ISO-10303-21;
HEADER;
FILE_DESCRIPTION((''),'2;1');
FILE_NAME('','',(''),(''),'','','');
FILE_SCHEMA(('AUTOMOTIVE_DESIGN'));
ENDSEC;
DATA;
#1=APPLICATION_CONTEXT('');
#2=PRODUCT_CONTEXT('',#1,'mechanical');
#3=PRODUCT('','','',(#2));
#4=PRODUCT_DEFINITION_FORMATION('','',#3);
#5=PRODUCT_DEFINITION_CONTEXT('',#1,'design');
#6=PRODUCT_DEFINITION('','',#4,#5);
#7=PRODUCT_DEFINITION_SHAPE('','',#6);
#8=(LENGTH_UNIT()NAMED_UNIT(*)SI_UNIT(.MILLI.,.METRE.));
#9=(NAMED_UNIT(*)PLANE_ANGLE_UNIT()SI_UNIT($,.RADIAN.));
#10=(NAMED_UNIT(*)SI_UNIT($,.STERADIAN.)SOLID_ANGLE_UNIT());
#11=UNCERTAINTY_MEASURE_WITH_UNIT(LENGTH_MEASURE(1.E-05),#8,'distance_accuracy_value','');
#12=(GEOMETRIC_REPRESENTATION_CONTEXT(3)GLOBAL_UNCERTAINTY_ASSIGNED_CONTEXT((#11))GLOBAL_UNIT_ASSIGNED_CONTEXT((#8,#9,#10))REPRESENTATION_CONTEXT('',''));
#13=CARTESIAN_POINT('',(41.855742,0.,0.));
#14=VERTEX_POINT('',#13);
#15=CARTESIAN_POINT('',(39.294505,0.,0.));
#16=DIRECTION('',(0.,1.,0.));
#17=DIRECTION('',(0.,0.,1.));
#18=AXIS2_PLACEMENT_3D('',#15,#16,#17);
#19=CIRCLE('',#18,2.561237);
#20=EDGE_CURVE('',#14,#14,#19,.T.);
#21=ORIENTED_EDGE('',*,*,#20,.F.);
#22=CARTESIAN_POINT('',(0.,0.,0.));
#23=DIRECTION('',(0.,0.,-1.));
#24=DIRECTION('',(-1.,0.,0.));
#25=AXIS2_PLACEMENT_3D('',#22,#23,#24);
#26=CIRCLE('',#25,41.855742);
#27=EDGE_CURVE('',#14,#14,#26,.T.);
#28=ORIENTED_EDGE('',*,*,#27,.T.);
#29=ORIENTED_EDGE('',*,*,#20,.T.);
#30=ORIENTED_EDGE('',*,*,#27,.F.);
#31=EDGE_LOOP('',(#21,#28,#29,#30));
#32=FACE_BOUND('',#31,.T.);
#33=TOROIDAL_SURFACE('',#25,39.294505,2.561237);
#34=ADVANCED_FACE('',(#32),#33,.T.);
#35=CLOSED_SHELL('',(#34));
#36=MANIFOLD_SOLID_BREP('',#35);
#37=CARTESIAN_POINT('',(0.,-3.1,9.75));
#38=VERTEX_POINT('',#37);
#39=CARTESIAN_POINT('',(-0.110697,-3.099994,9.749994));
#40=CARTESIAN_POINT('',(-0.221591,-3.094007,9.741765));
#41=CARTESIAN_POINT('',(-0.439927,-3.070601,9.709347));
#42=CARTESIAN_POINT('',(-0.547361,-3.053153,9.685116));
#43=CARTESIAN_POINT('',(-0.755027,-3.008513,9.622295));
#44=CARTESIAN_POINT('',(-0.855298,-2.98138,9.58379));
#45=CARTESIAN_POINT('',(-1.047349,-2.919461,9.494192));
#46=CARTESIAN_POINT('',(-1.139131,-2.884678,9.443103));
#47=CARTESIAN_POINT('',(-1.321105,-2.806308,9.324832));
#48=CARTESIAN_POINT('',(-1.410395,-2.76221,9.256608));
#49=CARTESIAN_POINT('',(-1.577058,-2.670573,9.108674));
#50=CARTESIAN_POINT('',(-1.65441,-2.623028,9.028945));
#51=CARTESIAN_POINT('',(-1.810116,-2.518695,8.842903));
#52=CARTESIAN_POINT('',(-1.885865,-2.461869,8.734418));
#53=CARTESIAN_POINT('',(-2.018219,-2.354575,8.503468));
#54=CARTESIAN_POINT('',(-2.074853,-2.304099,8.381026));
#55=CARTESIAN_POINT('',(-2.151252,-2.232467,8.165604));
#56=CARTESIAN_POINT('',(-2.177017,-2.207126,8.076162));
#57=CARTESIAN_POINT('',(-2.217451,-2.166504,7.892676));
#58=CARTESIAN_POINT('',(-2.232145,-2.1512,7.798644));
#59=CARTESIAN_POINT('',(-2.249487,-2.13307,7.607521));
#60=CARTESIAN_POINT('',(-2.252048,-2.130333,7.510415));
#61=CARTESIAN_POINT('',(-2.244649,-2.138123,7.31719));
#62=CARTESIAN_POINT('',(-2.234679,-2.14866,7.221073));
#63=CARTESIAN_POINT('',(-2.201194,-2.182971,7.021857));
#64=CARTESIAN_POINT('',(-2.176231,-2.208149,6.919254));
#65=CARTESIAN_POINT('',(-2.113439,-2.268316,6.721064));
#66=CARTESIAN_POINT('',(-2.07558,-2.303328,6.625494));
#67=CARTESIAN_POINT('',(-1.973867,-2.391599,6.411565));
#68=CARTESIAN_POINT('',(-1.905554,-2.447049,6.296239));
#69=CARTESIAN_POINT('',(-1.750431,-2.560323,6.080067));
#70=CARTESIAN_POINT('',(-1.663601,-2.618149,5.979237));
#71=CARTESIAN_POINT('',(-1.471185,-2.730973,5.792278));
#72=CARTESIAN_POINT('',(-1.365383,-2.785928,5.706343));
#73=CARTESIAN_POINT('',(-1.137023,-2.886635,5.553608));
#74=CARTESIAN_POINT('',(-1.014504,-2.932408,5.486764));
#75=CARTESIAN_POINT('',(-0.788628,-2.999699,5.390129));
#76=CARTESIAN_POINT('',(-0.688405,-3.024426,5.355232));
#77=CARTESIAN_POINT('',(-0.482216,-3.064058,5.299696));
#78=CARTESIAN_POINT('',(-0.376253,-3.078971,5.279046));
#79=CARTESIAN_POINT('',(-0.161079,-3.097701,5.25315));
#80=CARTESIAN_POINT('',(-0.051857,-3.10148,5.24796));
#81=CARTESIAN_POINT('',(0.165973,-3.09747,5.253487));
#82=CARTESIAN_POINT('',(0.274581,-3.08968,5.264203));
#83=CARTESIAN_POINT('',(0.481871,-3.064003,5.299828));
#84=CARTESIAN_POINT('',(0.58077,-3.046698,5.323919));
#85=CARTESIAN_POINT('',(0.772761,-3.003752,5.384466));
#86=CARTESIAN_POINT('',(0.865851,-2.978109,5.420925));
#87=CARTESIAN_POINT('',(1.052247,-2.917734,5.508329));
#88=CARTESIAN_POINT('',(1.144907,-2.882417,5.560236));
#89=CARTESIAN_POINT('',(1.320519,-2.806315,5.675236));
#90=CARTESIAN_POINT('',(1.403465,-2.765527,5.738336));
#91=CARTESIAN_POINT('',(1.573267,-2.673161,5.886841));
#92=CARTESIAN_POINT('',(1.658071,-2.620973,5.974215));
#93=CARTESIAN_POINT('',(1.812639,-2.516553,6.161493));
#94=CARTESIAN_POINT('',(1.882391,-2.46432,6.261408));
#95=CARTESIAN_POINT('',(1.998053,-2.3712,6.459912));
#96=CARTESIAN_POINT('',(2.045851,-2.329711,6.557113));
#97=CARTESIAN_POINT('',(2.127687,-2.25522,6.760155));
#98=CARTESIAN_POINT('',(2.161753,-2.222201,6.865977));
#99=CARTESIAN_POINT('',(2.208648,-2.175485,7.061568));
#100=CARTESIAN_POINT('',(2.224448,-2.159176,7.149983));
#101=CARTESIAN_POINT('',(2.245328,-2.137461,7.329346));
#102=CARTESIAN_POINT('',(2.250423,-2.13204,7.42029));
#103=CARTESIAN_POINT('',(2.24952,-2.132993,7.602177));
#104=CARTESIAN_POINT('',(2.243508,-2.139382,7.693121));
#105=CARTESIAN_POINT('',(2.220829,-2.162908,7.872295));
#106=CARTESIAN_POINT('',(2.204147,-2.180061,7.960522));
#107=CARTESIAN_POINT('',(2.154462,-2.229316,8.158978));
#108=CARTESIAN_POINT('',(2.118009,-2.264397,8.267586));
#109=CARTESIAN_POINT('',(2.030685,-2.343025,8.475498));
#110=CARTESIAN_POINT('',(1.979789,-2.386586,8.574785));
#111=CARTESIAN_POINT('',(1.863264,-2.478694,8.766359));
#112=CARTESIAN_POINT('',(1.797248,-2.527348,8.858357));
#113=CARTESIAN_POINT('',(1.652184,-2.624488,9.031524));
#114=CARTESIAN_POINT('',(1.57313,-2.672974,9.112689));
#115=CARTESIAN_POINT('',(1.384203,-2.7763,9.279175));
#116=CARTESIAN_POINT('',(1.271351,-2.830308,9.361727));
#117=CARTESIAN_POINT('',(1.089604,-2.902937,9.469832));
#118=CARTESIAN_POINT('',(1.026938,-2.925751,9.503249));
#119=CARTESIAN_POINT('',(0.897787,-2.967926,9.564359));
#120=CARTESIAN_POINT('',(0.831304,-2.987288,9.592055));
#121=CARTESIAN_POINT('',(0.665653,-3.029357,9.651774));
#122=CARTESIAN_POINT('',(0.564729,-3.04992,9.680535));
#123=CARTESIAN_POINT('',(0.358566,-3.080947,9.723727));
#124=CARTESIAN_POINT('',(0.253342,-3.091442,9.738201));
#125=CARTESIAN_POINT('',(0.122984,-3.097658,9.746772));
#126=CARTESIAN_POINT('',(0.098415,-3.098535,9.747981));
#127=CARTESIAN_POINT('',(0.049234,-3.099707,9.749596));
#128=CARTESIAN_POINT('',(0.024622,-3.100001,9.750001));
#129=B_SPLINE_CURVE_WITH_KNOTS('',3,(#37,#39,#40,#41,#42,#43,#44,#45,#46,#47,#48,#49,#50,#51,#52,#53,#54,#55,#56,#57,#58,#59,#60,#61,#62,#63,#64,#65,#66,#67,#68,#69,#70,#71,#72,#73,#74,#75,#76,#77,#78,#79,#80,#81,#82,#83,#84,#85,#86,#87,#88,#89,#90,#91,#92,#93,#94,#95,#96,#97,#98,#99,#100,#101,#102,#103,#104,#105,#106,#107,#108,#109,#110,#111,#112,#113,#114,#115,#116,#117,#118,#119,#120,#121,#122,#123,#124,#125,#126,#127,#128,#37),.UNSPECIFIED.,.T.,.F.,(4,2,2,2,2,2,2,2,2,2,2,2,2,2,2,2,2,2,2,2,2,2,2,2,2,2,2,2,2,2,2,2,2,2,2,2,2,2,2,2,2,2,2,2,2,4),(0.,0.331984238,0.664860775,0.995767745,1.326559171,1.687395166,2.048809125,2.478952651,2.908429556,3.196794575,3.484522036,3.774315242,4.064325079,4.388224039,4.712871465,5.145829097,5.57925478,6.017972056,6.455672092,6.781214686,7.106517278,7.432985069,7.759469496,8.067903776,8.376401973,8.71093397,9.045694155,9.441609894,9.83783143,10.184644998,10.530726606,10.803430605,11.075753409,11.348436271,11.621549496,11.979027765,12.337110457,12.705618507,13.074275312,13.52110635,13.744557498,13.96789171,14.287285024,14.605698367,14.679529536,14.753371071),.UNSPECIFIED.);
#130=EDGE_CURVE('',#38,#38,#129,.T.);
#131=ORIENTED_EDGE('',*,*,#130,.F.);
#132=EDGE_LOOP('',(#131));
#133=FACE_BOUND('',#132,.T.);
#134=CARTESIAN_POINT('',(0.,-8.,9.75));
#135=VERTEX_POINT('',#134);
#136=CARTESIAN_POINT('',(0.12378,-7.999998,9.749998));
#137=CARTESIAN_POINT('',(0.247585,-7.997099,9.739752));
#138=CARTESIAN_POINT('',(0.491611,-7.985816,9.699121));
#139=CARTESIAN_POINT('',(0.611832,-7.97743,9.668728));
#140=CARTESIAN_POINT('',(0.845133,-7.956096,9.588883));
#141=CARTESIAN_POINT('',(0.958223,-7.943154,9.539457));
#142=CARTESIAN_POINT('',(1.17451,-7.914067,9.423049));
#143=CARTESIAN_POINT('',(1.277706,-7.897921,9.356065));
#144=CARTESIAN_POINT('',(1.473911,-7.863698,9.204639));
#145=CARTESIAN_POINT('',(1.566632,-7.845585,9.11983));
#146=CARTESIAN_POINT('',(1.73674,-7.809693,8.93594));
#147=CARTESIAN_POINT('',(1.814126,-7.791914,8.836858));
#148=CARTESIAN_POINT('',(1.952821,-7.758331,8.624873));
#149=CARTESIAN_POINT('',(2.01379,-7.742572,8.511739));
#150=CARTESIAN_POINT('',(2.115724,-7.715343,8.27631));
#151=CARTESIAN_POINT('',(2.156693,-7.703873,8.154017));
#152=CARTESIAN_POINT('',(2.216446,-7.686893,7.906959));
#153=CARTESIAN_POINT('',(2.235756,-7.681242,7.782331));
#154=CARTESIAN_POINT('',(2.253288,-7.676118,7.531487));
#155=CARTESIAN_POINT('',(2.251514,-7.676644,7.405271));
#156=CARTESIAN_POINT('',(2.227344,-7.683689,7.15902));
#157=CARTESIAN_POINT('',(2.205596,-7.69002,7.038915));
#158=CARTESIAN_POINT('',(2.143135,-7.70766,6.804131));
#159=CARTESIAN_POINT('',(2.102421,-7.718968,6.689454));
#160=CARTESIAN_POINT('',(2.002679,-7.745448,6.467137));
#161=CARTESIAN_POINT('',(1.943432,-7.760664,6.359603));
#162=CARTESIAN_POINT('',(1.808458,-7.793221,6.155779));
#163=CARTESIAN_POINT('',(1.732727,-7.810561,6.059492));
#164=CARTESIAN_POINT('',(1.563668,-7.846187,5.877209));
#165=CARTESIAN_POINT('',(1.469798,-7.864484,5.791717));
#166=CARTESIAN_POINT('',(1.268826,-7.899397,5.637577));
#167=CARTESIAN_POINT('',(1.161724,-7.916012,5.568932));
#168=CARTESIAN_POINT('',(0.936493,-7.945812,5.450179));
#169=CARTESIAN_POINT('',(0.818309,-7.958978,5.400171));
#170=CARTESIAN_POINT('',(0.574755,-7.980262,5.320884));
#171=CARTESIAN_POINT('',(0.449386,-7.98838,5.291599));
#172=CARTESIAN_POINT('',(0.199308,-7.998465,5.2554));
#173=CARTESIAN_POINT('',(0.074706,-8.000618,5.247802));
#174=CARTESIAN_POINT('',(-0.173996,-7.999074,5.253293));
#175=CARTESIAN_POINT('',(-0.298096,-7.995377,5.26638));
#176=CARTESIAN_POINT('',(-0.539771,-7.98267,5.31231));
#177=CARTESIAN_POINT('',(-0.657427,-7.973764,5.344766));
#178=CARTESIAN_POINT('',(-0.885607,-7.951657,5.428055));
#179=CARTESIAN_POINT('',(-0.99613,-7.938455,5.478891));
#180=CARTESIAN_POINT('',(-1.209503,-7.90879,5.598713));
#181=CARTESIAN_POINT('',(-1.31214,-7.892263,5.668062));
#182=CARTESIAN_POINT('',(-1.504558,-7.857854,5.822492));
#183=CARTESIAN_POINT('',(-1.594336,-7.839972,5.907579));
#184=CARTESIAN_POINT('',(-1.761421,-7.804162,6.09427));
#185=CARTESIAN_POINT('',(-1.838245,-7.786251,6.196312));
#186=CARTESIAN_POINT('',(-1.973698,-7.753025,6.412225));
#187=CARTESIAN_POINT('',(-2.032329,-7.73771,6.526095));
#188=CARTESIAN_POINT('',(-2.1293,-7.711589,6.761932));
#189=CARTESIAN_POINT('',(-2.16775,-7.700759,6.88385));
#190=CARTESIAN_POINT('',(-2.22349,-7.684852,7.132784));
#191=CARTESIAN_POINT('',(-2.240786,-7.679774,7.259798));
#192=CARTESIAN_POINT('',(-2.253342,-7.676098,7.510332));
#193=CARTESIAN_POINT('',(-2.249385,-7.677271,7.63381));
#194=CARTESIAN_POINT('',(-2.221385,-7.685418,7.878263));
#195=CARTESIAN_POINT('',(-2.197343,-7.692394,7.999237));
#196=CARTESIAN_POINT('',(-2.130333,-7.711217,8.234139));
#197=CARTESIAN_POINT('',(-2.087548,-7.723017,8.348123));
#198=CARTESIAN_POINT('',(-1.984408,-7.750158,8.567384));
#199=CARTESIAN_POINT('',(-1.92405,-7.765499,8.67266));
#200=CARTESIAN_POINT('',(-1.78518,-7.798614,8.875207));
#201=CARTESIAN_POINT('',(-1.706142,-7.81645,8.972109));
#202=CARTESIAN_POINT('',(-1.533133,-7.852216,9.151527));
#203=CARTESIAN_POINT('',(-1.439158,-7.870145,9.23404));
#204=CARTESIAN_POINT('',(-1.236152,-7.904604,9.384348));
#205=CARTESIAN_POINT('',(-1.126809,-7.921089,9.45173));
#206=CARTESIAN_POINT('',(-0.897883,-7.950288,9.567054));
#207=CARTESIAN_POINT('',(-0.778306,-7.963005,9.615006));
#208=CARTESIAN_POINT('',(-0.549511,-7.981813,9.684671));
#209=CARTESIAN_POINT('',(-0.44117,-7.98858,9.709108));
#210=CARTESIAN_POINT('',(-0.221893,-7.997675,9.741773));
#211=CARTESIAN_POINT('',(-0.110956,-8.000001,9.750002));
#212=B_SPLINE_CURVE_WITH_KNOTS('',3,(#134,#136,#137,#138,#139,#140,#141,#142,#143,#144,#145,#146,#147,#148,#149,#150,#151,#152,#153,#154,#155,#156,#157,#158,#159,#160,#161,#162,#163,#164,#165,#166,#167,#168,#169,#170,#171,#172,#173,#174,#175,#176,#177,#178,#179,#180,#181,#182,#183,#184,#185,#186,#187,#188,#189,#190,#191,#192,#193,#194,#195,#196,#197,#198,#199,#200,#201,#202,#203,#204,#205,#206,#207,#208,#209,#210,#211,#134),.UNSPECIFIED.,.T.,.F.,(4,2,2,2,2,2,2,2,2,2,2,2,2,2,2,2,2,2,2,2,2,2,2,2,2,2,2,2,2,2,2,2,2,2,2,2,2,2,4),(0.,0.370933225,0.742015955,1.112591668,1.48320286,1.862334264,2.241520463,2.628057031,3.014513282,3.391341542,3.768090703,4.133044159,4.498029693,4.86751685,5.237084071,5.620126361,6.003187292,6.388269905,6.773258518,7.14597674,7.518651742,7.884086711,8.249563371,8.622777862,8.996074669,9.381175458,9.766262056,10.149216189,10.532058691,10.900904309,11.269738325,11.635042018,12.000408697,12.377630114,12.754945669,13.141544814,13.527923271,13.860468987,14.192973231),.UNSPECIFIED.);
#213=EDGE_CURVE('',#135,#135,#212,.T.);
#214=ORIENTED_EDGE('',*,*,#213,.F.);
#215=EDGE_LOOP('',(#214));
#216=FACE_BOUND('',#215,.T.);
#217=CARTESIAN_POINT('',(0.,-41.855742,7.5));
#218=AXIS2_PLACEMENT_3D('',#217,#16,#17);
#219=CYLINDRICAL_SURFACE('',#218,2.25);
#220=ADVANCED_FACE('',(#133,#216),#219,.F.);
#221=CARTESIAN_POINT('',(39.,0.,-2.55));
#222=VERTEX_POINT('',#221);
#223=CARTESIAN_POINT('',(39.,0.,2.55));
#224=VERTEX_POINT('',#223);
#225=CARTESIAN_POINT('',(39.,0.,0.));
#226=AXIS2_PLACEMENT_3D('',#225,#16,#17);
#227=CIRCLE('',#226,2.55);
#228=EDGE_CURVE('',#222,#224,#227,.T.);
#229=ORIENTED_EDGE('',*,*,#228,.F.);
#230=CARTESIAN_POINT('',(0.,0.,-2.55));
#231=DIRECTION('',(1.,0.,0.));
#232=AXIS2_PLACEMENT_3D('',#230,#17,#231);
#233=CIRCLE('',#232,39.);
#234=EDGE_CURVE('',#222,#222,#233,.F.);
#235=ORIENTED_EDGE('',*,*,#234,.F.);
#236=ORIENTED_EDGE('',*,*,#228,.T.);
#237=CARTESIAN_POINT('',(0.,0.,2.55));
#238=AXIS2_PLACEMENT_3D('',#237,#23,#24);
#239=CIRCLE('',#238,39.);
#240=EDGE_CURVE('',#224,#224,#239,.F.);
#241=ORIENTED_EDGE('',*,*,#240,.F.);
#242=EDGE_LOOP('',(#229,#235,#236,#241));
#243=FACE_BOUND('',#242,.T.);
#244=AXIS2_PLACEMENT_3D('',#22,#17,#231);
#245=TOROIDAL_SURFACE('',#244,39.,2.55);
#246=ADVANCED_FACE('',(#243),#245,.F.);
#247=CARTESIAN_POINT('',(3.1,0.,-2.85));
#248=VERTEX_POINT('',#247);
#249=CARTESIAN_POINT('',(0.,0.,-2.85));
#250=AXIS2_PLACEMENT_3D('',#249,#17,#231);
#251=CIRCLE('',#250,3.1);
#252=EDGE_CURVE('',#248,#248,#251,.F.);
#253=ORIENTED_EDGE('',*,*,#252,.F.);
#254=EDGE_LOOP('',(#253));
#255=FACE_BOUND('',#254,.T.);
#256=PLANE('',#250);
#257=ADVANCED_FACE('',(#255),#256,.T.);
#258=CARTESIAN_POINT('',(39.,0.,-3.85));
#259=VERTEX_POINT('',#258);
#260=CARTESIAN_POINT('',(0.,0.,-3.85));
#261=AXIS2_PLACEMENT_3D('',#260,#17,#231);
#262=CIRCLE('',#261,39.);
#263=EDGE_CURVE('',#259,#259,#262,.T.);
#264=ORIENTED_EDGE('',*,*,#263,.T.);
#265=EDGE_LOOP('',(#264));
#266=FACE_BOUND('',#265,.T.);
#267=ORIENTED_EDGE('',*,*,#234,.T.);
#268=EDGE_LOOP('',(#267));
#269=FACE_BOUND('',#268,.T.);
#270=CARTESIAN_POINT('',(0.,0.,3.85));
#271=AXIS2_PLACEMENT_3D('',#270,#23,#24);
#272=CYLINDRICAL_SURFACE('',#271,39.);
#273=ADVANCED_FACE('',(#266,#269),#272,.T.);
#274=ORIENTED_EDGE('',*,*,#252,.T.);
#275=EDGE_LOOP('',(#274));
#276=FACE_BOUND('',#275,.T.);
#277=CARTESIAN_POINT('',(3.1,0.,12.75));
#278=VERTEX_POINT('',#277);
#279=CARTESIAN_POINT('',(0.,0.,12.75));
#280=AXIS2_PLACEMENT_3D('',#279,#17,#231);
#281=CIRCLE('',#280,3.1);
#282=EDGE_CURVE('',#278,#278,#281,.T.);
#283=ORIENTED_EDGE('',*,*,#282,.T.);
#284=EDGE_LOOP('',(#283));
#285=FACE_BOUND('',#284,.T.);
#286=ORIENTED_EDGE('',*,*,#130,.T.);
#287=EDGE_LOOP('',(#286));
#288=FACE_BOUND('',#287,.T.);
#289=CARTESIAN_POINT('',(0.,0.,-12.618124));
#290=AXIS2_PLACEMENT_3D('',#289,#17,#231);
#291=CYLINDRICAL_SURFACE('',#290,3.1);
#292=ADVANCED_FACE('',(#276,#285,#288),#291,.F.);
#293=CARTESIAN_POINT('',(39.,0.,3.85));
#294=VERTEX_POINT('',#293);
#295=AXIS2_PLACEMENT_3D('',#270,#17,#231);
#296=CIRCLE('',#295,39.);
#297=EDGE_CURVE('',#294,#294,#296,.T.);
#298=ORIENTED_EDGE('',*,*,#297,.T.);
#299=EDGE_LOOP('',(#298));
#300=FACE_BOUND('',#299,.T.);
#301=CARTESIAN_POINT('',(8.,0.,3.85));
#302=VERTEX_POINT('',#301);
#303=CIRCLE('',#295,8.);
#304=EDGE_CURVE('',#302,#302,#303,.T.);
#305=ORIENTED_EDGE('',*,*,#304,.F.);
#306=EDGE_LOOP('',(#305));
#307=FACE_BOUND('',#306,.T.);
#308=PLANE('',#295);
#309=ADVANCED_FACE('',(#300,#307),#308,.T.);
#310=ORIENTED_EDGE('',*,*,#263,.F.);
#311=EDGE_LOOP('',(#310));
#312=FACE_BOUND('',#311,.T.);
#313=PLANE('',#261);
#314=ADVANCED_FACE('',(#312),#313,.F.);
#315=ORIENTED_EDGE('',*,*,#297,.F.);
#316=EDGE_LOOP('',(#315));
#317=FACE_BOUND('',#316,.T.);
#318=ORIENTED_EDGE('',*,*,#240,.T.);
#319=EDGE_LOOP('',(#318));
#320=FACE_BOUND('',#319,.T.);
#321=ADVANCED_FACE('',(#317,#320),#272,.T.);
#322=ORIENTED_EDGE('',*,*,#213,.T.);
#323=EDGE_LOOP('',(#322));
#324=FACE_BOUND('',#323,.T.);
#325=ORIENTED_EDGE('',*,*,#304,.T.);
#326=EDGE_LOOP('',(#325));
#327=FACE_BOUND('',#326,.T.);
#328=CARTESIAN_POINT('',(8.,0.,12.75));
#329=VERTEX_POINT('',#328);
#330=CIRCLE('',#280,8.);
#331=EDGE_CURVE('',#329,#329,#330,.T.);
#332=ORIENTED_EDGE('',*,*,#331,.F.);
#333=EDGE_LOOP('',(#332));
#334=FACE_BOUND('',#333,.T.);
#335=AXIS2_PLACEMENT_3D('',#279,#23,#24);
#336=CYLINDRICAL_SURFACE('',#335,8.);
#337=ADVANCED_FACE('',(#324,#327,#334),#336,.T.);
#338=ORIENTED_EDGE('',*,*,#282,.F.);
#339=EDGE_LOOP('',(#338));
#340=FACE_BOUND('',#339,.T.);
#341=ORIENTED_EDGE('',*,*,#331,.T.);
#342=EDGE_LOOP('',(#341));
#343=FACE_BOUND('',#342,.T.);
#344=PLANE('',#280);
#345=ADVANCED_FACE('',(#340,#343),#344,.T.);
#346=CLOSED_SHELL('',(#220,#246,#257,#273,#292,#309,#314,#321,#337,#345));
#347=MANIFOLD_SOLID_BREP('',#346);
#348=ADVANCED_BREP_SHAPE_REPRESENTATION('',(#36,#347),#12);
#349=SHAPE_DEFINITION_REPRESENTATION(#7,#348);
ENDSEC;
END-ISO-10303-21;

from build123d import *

# Parameters (mm, degrees)
SKETCH1_R           = 39
BOSS_EXTRUDE1_DEPTH = 3.85
SKETCH2_R           = 2.55
SWEEP1_OUTLINE_R    = 2.561236926
SKETCH4_R           = 8
BOSS_EXTRUDE2_DEPTH = 8.9
SKETCH5_R           = 3.1
CUT_EXTRUDE1_DEPTH  = 15.6
SKETCH6_R           = 2.25
CUT_EXTRUDE2_DEPTH  = 61.550547037


# Read off the part's stored shape, not the designer's step: Sweep1
with BuildPart() as part:
    # Sketch1 → Boss-Extrude1 (new, symmetric)
    with BuildSketch(Plane.XY):
        with Locations(Location((0, 0, 0), (0, 0, 180))):
            Circle(SKETCH1_R)
    extrude(amount=BOSS_EXTRUDE1_DEPTH, both=True)

    # Cut-Sweep1: sweep along a curve in space
    with BuildLine() as cut_sweep1_path:
        ThreePointArc((39, 0, -3.85), (27.577164466, 27.577164466, -3.85), (0, 39, -3.85))
        ThreePointArc((0, 39, -3.85), (-27.577164466, 27.577164466, -3.85), (-39, 0, -3.85))
        ThreePointArc((-39, 0, -3.85), (-27.577164466, -27.577164466, -3.85), (0, -39, -3.85))
        ThreePointArc((0, -39, -3.85), (27.577164466, -27.577164466, -3.85), (39, 0, -3.85))
    # Sketch2 → Cut-Sweep1 (sweep, cut)
    with BuildSketch(Plane(origin=(0, 0, 0), x_dir=(1, 0, 0), z_dir=(0, 1, 0))):
        with Locations((39, 0)):
            Circle(SKETCH2_R)
    sweep(path=cut_sweep1_path.line, mode=Mode.SUBTRACT)

    # Sketch4 → Boss-Extrude2 (add)
    with BuildSketch(Plane.XY.offset(3.85)):
        Circle(SKETCH4_R)
    extrude(amount=BOSS_EXTRUDE2_DEPTH)

    # Sketch5 → Cut-Extrude1 (cut)
    with BuildSketch(Plane.XY.offset(12.75)):
        Circle(SKETCH5_R)
    extrude(amount=-CUT_EXTRUDE1_DEPTH, mode=Mode.SUBTRACT)

    # Sketch6 → Cut-Extrude2 (cut, through all)
    with BuildSketch(Plane(origin=(0, 0, 0), x_dir=(1, 0, 0), z_dir=(0, 1, 0))):
        with Locations(Location((0, -7.5, 0), (0, 0, 270))):
            Circle(SKETCH6_R)
    extrude(amount=-CUT_EXTRUDE2_DEPTH, mode=Mode.SUBTRACT)


with BuildPart() as body_2:
    # Sweep1 outline → Sweep1 (revolve)
    with BuildSketch(Plane.XZ):
        with Locations((39.294504793, 0)):
            Circle(SWEEP1_OUTLINE_R)
    revolve(axis=Axis((0, 0, 0), (0, 0, 1)))


solid = Compound([part.part, body_2.part])
